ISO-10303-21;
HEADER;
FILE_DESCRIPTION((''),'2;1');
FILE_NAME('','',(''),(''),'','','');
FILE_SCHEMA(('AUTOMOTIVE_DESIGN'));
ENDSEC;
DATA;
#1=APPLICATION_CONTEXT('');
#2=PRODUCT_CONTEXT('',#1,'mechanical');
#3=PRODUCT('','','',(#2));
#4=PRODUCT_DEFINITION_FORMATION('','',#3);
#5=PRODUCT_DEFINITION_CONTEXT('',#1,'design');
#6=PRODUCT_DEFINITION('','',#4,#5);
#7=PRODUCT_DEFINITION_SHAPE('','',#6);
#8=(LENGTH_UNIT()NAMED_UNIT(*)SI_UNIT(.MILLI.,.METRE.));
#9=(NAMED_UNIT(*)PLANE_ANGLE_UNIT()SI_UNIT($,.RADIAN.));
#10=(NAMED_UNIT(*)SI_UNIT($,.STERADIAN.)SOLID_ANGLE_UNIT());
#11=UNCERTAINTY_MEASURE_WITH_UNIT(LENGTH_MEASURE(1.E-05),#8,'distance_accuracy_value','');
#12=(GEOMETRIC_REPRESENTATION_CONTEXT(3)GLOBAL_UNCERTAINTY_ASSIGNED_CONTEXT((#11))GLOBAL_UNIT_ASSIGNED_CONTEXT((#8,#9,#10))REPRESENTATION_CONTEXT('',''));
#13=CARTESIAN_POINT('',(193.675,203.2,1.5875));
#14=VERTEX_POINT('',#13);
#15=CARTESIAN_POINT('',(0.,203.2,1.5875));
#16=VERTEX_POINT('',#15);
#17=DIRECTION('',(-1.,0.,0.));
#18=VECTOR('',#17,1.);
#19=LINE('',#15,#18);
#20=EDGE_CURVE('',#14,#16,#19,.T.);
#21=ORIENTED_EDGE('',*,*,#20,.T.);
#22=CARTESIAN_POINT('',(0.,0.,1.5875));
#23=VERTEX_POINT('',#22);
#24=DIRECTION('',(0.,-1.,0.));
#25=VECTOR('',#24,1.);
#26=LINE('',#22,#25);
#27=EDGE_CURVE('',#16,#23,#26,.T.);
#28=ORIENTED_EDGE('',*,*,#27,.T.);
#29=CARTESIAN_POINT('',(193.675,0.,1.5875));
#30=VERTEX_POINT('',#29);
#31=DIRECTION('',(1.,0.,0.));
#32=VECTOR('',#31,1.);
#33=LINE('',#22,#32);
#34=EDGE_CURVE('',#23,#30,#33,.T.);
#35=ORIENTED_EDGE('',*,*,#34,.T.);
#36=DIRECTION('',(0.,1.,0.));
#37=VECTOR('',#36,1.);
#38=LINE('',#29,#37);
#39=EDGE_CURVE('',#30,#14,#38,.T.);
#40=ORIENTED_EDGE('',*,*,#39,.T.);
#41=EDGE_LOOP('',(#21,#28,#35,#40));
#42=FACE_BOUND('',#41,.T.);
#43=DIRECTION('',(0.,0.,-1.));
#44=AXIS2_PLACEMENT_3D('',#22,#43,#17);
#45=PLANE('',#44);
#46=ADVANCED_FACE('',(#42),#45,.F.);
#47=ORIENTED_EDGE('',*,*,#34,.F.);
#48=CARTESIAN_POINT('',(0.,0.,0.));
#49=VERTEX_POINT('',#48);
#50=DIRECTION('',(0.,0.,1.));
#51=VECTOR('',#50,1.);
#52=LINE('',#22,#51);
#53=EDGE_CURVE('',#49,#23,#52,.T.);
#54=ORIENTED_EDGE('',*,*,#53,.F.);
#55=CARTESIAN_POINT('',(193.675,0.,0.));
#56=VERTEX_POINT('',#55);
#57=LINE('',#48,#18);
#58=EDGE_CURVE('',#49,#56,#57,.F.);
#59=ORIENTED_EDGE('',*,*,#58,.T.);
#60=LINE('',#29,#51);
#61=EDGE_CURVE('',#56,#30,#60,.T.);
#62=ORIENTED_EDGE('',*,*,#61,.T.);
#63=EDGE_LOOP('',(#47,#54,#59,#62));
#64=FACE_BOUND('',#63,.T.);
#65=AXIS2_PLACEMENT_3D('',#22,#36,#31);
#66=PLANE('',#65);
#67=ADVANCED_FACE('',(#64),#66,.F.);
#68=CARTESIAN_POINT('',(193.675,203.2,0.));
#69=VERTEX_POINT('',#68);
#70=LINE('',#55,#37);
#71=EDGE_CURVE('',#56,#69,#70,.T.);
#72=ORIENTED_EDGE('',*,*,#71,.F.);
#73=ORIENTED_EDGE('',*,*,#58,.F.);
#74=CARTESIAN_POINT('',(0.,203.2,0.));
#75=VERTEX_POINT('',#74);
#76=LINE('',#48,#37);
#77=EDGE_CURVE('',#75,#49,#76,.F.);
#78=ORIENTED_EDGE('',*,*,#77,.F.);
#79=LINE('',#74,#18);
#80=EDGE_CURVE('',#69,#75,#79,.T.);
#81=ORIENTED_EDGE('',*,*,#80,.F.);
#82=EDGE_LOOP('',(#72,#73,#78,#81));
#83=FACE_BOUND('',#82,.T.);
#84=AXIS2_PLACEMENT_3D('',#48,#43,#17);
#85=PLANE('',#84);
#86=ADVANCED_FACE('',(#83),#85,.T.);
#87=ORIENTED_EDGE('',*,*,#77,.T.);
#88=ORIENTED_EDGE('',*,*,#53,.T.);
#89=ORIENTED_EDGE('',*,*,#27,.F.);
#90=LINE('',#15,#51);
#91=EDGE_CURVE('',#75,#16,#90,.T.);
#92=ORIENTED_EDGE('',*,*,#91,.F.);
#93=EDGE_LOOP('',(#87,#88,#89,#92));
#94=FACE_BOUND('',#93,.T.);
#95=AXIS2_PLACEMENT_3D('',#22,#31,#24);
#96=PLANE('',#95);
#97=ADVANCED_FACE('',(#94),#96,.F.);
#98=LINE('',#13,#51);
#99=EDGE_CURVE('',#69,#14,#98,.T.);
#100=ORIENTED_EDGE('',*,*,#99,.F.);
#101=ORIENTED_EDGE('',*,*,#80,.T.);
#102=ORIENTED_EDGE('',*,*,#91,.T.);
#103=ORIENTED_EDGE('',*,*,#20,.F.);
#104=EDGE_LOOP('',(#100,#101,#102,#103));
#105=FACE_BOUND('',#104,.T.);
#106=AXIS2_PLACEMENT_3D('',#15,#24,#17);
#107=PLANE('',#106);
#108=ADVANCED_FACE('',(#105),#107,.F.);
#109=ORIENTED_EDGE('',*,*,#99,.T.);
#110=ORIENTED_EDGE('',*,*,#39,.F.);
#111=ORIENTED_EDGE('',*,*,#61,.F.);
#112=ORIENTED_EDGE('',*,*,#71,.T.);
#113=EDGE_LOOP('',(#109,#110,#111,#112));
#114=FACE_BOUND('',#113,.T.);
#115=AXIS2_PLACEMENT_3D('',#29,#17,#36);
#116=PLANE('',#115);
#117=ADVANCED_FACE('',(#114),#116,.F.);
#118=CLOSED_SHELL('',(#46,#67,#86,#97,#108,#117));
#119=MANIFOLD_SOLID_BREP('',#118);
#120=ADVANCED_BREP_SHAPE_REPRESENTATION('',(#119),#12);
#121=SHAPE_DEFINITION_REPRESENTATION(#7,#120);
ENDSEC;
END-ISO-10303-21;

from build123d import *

# Parameters (mm, degrees)
SKETCH1_W           = 193.675
SKETCH1_H           = 203.2
BOSS_EXTRUDE1_DEPTH = 1.5875


with BuildPart() as part:
    # Sketch1 → Boss-Extrude1 (new body)
    with BuildSketch(Plane.XY):
        with Locations((96.8375, 101.6)):
            Rectangle(SKETCH1_W, SKETCH1_H)
    extrude(amount=BOSS_EXTRUDE1_DEPTH)


solid = part.part
